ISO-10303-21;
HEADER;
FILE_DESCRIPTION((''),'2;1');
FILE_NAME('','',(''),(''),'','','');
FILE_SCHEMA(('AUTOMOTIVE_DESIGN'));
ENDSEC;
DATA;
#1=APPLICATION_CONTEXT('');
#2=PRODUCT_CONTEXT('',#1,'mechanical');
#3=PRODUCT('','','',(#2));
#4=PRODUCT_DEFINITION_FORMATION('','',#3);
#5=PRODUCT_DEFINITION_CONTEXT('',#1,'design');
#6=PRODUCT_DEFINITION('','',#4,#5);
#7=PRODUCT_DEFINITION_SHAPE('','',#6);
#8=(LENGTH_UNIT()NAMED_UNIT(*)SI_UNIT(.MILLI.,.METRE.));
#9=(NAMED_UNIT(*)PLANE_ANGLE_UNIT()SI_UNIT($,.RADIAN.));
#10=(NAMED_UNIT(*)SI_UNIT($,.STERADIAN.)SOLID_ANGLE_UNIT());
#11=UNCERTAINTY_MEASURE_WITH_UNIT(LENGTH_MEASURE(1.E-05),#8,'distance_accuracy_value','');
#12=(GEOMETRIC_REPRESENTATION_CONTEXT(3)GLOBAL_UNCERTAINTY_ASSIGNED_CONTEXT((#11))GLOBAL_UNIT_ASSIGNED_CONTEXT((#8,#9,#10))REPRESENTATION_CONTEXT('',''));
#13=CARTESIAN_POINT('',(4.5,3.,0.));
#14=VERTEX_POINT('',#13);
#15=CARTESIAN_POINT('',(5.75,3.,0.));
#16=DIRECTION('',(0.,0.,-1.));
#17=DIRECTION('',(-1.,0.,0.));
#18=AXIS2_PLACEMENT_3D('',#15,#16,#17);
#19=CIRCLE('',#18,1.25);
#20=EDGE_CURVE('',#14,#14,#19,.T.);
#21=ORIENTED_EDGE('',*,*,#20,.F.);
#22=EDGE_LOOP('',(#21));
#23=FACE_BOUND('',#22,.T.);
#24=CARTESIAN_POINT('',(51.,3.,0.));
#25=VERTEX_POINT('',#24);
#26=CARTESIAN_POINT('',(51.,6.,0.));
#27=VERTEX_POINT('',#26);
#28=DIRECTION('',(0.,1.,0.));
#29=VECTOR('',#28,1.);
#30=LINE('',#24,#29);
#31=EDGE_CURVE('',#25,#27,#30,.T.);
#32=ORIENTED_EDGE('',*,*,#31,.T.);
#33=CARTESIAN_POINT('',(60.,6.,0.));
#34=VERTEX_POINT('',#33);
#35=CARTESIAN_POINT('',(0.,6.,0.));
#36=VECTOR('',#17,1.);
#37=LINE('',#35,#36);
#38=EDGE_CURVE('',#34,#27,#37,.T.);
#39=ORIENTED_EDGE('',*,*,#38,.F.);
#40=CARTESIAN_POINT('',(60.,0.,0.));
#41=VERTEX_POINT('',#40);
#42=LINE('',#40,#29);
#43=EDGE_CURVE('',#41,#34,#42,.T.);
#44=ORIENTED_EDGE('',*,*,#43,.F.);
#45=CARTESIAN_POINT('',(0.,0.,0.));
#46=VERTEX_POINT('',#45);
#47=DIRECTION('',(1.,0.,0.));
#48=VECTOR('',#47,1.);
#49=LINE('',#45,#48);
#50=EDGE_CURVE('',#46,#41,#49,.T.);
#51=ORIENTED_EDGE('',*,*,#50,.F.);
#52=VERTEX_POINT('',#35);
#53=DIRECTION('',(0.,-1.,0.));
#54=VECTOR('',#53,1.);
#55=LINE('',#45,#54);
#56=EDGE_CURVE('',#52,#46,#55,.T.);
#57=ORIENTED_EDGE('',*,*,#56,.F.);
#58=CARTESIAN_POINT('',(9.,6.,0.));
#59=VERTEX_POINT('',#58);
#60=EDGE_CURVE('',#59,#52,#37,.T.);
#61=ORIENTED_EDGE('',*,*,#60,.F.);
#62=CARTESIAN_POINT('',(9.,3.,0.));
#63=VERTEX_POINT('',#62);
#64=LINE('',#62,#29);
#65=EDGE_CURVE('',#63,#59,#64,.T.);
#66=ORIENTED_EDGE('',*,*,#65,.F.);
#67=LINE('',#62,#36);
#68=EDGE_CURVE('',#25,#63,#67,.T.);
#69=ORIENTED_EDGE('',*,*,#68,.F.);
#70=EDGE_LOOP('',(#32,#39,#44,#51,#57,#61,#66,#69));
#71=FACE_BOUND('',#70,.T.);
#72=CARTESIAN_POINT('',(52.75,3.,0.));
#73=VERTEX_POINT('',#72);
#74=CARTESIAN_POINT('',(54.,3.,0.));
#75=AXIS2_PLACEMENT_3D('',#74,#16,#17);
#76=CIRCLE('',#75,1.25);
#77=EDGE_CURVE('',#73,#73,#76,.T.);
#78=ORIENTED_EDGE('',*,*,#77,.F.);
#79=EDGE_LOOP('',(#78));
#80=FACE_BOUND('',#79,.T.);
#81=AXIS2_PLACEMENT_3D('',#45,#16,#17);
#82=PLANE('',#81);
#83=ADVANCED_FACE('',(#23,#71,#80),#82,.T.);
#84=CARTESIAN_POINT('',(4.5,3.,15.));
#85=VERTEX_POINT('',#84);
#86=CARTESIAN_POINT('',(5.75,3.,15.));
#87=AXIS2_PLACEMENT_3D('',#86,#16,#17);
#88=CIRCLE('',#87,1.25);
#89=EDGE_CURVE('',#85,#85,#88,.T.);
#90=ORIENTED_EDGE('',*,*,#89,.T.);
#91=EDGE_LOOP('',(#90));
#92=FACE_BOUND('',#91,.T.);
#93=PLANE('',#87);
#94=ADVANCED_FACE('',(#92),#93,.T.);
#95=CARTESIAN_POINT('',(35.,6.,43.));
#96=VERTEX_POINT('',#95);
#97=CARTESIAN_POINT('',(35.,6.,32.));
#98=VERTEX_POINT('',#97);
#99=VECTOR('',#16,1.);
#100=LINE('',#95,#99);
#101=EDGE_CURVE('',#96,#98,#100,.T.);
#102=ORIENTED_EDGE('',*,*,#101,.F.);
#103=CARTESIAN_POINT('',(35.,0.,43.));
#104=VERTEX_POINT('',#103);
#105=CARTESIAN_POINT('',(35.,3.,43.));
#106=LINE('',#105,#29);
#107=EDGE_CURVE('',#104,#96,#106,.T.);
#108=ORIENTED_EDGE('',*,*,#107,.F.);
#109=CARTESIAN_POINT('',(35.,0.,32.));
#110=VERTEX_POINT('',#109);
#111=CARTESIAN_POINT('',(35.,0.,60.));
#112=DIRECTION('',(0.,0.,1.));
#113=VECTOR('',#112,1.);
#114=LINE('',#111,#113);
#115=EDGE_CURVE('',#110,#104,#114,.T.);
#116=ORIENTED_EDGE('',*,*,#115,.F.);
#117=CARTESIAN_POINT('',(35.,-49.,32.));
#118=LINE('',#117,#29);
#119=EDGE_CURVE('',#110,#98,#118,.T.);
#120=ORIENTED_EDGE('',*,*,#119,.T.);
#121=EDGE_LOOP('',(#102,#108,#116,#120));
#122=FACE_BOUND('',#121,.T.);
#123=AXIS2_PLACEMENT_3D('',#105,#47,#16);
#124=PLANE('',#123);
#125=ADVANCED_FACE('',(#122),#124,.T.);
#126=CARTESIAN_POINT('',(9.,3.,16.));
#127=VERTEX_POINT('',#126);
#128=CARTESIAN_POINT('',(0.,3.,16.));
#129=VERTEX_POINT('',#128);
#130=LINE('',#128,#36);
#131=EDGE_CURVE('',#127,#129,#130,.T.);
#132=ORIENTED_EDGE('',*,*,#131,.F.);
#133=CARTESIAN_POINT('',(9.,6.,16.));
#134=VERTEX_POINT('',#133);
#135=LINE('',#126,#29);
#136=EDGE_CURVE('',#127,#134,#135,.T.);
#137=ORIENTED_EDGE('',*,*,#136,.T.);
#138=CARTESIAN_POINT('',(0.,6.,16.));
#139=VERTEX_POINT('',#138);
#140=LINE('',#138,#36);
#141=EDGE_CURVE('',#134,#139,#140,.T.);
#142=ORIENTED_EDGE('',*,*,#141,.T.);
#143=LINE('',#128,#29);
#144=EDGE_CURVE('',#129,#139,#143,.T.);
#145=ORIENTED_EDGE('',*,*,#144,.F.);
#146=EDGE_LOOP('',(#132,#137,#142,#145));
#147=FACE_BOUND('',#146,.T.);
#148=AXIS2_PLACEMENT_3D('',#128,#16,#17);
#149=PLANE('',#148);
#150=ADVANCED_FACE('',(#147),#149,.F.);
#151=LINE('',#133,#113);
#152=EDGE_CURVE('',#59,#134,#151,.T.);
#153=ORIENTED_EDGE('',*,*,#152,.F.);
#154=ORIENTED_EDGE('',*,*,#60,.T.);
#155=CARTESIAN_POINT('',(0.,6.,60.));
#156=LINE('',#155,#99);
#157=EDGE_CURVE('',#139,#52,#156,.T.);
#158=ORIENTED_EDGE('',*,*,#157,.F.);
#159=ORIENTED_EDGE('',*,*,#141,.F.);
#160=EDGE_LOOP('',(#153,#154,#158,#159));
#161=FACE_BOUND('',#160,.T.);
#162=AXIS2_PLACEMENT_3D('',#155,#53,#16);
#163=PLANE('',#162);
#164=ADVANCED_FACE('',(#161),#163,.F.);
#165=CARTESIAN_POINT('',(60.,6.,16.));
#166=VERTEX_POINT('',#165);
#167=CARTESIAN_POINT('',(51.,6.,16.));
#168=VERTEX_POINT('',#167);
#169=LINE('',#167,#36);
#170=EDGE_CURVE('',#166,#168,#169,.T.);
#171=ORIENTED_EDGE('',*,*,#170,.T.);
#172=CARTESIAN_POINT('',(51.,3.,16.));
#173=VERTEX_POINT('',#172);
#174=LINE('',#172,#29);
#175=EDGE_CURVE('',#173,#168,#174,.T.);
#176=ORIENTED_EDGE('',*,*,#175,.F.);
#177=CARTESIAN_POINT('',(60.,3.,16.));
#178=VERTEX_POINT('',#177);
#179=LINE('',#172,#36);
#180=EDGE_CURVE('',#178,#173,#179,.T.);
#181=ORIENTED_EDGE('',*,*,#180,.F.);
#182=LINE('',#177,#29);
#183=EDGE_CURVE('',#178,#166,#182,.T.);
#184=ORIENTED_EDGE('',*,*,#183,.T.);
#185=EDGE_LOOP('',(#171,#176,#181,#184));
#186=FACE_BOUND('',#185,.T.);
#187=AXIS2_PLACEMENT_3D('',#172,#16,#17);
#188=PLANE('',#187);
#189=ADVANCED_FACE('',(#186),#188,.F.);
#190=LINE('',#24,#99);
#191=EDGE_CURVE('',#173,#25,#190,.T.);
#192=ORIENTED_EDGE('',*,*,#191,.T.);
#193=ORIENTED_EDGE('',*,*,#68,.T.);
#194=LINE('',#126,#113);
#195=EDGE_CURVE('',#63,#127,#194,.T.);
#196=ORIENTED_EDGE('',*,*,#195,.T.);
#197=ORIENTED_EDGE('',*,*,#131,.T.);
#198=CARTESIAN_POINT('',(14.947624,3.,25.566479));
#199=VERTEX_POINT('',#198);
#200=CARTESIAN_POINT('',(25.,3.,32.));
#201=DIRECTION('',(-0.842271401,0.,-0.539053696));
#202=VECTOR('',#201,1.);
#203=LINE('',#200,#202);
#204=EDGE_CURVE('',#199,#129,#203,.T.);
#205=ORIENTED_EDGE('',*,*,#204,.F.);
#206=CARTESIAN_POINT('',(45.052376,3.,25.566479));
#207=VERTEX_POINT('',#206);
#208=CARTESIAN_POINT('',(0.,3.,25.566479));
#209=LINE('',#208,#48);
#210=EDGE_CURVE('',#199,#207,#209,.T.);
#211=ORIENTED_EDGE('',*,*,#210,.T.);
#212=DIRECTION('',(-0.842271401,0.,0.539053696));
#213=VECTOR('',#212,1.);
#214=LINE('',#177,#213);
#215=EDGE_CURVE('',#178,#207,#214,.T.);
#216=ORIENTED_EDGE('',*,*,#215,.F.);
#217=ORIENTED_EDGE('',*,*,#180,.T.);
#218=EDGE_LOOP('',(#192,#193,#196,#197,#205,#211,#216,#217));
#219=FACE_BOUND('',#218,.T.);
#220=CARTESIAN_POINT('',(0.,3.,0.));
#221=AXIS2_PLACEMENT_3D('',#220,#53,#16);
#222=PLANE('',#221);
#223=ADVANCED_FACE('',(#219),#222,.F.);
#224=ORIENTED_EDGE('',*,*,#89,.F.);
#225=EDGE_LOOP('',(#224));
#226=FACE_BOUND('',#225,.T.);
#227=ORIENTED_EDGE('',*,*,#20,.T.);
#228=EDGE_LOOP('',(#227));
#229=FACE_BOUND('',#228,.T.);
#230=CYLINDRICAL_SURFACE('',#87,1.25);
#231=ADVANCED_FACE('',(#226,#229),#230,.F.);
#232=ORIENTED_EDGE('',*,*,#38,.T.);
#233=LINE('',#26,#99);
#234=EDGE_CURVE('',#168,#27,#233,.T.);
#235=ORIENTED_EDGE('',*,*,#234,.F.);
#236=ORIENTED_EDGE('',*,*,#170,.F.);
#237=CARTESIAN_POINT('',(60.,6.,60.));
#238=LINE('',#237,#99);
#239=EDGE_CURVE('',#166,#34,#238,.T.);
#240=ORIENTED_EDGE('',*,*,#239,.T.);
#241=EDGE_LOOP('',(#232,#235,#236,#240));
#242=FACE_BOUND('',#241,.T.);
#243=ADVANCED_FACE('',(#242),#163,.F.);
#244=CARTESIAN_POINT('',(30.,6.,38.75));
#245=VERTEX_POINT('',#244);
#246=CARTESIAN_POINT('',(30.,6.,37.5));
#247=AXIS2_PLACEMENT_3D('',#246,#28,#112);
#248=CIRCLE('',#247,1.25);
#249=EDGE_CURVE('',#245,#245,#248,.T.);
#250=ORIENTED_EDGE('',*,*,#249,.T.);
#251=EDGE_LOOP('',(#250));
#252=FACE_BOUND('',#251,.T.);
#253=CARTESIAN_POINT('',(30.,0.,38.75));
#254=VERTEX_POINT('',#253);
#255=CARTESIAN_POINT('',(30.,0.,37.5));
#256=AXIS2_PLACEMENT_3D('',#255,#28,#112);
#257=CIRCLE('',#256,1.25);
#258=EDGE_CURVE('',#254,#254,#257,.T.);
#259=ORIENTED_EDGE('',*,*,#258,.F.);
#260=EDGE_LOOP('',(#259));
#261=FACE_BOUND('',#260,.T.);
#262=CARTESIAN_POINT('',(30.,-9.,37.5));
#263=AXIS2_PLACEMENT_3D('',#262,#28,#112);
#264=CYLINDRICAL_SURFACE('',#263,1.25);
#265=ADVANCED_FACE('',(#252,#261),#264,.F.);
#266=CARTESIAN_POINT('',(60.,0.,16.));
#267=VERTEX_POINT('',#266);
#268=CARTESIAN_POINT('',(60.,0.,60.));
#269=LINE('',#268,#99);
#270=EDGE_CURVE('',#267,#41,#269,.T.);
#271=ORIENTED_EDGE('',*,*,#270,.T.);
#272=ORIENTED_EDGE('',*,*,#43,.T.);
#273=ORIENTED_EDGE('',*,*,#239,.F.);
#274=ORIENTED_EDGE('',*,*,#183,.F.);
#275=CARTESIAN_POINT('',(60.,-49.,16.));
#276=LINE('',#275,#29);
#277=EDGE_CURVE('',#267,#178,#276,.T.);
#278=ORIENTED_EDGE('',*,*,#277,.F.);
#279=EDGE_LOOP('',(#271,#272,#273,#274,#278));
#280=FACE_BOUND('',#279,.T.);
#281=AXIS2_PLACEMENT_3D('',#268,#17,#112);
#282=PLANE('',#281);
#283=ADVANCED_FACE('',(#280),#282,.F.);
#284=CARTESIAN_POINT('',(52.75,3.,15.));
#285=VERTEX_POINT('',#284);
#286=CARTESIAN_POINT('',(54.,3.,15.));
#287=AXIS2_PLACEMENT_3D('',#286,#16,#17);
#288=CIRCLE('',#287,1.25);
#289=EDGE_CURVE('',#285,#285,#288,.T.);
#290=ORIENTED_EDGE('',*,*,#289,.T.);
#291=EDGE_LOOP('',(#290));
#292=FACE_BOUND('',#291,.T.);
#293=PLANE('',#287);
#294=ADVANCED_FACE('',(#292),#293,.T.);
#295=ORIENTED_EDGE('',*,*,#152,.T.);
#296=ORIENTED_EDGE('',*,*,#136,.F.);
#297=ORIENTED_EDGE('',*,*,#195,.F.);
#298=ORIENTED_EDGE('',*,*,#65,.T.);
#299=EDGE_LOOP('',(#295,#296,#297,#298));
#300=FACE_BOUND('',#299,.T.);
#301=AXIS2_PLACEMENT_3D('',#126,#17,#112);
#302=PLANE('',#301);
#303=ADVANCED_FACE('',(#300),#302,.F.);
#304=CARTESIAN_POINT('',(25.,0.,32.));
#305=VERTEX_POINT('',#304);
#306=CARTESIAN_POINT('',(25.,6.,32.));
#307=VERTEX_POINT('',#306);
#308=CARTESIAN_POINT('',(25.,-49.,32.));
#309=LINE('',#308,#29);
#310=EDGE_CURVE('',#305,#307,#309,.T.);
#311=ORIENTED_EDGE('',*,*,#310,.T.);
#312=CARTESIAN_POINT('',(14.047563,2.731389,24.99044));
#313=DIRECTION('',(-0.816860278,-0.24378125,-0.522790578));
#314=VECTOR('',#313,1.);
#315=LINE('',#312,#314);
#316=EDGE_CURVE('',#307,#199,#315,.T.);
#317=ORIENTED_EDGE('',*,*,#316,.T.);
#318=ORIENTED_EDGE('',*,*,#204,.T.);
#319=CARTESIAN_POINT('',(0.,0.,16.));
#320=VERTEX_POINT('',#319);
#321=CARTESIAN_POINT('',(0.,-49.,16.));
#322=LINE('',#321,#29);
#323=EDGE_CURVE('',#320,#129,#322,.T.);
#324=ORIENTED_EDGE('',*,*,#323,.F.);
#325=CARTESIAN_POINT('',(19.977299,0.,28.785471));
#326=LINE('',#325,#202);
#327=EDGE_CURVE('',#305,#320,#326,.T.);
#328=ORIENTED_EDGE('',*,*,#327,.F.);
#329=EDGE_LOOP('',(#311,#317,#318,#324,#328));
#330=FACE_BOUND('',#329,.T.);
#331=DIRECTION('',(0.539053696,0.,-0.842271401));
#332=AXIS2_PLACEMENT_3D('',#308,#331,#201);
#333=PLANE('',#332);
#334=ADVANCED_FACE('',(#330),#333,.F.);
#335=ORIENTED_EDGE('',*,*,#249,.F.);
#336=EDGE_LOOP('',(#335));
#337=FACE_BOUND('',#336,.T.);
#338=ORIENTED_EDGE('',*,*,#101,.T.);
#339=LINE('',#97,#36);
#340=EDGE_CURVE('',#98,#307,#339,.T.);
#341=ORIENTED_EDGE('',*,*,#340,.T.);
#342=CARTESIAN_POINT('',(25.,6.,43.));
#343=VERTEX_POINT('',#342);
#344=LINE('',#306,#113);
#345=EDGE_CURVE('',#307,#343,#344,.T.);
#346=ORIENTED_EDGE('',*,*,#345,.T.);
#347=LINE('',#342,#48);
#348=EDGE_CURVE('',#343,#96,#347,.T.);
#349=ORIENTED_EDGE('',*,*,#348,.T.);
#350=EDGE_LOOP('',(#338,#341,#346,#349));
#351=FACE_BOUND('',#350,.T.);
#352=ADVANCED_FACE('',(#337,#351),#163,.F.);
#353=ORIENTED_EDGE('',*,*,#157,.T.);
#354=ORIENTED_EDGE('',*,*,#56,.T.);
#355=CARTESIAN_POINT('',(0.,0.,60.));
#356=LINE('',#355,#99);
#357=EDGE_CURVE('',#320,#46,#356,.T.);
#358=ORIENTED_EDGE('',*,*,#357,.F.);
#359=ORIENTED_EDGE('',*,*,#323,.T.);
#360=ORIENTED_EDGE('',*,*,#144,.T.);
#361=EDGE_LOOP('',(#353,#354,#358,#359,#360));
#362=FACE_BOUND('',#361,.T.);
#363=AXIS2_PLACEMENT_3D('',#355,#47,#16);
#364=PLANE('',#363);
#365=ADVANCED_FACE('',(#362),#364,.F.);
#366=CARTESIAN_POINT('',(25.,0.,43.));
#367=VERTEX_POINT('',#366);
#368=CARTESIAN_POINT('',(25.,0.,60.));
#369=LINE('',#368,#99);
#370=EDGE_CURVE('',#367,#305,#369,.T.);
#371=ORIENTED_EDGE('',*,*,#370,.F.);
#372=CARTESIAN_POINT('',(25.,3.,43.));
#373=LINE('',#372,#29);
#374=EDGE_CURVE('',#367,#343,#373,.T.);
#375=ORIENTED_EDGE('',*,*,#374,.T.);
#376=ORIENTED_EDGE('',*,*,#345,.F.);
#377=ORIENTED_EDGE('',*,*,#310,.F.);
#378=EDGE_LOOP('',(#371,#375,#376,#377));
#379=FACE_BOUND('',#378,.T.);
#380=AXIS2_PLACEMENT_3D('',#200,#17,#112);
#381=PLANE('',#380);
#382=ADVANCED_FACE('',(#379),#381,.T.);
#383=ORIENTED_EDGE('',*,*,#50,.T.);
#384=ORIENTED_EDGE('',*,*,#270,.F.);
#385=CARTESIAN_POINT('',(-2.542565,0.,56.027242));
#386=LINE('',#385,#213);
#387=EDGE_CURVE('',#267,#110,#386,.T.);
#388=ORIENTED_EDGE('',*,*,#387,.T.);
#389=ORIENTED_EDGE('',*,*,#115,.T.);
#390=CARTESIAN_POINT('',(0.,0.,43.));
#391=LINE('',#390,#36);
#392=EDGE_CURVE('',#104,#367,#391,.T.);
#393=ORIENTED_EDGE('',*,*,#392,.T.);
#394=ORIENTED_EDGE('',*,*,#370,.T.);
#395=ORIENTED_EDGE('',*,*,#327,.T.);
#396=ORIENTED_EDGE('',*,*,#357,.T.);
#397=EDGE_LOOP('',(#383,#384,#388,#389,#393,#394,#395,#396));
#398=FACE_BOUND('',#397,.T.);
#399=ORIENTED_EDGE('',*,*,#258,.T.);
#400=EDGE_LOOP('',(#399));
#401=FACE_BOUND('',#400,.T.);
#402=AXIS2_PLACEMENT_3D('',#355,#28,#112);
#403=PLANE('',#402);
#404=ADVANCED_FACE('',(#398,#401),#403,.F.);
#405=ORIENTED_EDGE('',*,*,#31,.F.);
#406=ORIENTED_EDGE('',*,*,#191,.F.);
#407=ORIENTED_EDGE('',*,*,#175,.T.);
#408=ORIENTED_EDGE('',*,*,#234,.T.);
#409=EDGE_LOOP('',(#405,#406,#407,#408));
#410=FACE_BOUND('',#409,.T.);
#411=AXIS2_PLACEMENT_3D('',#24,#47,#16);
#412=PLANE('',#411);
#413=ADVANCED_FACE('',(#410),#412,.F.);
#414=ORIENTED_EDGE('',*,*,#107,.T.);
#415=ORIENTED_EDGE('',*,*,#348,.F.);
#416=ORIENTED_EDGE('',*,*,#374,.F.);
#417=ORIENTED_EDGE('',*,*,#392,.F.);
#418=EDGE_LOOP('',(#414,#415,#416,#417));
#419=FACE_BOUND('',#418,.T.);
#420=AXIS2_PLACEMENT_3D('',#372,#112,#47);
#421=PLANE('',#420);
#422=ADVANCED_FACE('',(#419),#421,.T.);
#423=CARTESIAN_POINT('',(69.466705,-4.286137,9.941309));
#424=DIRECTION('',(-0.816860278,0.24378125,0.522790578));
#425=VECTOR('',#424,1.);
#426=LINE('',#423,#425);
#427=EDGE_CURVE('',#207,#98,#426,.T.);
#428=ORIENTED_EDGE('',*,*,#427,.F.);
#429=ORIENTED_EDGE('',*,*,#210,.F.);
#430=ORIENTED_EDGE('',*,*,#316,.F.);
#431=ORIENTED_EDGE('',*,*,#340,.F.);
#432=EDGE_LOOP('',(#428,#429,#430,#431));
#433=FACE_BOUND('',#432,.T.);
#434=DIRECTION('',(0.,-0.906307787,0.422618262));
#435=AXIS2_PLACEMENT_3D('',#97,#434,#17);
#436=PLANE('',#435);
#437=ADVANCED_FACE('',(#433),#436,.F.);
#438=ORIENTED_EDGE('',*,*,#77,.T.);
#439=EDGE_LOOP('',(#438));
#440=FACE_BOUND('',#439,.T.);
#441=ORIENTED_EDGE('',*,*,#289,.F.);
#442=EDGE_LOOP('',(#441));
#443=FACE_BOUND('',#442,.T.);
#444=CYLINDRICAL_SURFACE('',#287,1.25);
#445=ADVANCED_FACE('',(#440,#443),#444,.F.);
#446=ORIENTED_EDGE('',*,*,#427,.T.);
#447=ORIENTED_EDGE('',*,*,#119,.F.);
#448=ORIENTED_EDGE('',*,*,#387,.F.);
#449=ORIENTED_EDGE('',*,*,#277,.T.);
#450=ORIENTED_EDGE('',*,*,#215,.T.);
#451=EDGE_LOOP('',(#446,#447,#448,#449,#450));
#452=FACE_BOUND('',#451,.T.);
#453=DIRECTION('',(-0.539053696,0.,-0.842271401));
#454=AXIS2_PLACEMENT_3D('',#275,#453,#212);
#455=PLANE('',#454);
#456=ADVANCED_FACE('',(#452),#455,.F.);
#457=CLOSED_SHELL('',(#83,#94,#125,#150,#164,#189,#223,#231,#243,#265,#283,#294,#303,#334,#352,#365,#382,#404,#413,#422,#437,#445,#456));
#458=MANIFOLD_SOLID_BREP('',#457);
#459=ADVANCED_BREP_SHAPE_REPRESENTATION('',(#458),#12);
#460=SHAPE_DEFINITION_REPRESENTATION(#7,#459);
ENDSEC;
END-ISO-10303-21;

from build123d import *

# Parameters (mm, degrees)
ESQUISSE1_W             = 60
ESQUISSE1_H             = 6
BOSS_EXTRU_1_DEPTH      = 60
ESQUISSE2_R             = 1.25
ENL_V_MAT_EXTRU_1_DEPTH = 15
ESQUISSE3_R             = 1.25
ENL_V_MAT_EXTRU_2_DEPTH = 15
ESQUISSE4_W             = 10
ESQUISSE4_H             = 11
ENL_V_MAT_EXTRU_3_DEPTH = 3
ENL_V_MAT_EXTRU_4_DEPTH = 52
CHANFREIN1_SIZE2        = 6.433520762
CHANFREIN1_SIZE         = 3


with BuildPart() as part:
    # Esquisse1 → Boss.-Extru.1 (new body)
    with BuildSketch(Plane.XY):
        with Locations((30, 3)):
            Rectangle(ESQUISSE1_W, ESQUISSE1_H)
    extrude(amount=BOSS_EXTRU_1_DEPTH)

    # Esquisse2 → Enlèv. mat.-Extru.1 (cut)
    with BuildSketch(Plane(origin=(0, 0, 0), x_dir=(-1, 0, 0), z_dir=(0, 0, -1))):
        with Locations((-54, 3)):
            Circle(ESQUISSE2_R)
        with Locations((-5.75, 3)):
            Circle(ESQUISSE2_R)
    extrude(amount=-ENL_V_MAT_EXTRU_1_DEPTH, mode=Mode.SUBTRACT)

    # Esquisse3 → Enlèv. mat.-Extru.2 (cut)
    with BuildSketch(Plane(origin=(0, 6, 0), x_dir=(1, 0, 0), z_dir=(0, 1, 0))):
        with Locations(Location((30, -37.5, 0), (0, 0, 270))):
            Circle(ESQUISSE3_R)
    extrude(amount=-ENL_V_MAT_EXTRU_2_DEPTH, mode=Mode.SUBTRACT)

    # Esquisse4 → Enlèv. mat.-Extru.3 (cut)
    with BuildSketch(Plane(origin=(0, 6, 0), x_dir=(1, 0, 0), z_dir=(0, 1, 0))):
        Polygon((0, -16), (9, -16), (9, 0), (51, 0), (51, -16), (60, -16), (60, -60), (0, -60), align=None)
        with Locations((30, -37.5)):
            Rectangle(ESQUISSE4_W, ESQUISSE4_H, mode=Mode.SUBTRACT)
    extrude(amount=-ENL_V_MAT_EXTRU_3_DEPTH, mode=Mode.SUBTRACT)

    # Esquisse5 → Enlèv. mat.-Extru.4 (cut)
    with BuildSketch(Plane(origin=(0, 3, 0), x_dir=(1, 0, 0), z_dir=(0, 1, 0))):
        Polygon((60, -16), (35, -32), (35, -43), (25, -43), (25, -32), (0, -16), (-21.594855386, -85.475485762), (75.414479662, -69.930764824), align=None)
    extrude(amount=-ENL_V_MAT_EXTRU_4_DEPTH, mode=Mode.SUBTRACT)

    # Chanfrein1
    chanfrein1_edges = [part.edges().sort_by_distance(p)[0] for p in [
        (30, 3, 32),
    ]]
    chanfrein1_side = [part.faces().sort_by_distance(p)[0] for p in [
        (30, 3.06, 32),
    ]]
    chamfer(chanfrein1_edges, length=CHANFREIN1_SIZE - 0.0001, length2=CHANFREIN1_SIZE2 - 0.0001, reference=chanfrein1_side[0])  # a hair under: the kernel refuses the full size


solid = part.part
